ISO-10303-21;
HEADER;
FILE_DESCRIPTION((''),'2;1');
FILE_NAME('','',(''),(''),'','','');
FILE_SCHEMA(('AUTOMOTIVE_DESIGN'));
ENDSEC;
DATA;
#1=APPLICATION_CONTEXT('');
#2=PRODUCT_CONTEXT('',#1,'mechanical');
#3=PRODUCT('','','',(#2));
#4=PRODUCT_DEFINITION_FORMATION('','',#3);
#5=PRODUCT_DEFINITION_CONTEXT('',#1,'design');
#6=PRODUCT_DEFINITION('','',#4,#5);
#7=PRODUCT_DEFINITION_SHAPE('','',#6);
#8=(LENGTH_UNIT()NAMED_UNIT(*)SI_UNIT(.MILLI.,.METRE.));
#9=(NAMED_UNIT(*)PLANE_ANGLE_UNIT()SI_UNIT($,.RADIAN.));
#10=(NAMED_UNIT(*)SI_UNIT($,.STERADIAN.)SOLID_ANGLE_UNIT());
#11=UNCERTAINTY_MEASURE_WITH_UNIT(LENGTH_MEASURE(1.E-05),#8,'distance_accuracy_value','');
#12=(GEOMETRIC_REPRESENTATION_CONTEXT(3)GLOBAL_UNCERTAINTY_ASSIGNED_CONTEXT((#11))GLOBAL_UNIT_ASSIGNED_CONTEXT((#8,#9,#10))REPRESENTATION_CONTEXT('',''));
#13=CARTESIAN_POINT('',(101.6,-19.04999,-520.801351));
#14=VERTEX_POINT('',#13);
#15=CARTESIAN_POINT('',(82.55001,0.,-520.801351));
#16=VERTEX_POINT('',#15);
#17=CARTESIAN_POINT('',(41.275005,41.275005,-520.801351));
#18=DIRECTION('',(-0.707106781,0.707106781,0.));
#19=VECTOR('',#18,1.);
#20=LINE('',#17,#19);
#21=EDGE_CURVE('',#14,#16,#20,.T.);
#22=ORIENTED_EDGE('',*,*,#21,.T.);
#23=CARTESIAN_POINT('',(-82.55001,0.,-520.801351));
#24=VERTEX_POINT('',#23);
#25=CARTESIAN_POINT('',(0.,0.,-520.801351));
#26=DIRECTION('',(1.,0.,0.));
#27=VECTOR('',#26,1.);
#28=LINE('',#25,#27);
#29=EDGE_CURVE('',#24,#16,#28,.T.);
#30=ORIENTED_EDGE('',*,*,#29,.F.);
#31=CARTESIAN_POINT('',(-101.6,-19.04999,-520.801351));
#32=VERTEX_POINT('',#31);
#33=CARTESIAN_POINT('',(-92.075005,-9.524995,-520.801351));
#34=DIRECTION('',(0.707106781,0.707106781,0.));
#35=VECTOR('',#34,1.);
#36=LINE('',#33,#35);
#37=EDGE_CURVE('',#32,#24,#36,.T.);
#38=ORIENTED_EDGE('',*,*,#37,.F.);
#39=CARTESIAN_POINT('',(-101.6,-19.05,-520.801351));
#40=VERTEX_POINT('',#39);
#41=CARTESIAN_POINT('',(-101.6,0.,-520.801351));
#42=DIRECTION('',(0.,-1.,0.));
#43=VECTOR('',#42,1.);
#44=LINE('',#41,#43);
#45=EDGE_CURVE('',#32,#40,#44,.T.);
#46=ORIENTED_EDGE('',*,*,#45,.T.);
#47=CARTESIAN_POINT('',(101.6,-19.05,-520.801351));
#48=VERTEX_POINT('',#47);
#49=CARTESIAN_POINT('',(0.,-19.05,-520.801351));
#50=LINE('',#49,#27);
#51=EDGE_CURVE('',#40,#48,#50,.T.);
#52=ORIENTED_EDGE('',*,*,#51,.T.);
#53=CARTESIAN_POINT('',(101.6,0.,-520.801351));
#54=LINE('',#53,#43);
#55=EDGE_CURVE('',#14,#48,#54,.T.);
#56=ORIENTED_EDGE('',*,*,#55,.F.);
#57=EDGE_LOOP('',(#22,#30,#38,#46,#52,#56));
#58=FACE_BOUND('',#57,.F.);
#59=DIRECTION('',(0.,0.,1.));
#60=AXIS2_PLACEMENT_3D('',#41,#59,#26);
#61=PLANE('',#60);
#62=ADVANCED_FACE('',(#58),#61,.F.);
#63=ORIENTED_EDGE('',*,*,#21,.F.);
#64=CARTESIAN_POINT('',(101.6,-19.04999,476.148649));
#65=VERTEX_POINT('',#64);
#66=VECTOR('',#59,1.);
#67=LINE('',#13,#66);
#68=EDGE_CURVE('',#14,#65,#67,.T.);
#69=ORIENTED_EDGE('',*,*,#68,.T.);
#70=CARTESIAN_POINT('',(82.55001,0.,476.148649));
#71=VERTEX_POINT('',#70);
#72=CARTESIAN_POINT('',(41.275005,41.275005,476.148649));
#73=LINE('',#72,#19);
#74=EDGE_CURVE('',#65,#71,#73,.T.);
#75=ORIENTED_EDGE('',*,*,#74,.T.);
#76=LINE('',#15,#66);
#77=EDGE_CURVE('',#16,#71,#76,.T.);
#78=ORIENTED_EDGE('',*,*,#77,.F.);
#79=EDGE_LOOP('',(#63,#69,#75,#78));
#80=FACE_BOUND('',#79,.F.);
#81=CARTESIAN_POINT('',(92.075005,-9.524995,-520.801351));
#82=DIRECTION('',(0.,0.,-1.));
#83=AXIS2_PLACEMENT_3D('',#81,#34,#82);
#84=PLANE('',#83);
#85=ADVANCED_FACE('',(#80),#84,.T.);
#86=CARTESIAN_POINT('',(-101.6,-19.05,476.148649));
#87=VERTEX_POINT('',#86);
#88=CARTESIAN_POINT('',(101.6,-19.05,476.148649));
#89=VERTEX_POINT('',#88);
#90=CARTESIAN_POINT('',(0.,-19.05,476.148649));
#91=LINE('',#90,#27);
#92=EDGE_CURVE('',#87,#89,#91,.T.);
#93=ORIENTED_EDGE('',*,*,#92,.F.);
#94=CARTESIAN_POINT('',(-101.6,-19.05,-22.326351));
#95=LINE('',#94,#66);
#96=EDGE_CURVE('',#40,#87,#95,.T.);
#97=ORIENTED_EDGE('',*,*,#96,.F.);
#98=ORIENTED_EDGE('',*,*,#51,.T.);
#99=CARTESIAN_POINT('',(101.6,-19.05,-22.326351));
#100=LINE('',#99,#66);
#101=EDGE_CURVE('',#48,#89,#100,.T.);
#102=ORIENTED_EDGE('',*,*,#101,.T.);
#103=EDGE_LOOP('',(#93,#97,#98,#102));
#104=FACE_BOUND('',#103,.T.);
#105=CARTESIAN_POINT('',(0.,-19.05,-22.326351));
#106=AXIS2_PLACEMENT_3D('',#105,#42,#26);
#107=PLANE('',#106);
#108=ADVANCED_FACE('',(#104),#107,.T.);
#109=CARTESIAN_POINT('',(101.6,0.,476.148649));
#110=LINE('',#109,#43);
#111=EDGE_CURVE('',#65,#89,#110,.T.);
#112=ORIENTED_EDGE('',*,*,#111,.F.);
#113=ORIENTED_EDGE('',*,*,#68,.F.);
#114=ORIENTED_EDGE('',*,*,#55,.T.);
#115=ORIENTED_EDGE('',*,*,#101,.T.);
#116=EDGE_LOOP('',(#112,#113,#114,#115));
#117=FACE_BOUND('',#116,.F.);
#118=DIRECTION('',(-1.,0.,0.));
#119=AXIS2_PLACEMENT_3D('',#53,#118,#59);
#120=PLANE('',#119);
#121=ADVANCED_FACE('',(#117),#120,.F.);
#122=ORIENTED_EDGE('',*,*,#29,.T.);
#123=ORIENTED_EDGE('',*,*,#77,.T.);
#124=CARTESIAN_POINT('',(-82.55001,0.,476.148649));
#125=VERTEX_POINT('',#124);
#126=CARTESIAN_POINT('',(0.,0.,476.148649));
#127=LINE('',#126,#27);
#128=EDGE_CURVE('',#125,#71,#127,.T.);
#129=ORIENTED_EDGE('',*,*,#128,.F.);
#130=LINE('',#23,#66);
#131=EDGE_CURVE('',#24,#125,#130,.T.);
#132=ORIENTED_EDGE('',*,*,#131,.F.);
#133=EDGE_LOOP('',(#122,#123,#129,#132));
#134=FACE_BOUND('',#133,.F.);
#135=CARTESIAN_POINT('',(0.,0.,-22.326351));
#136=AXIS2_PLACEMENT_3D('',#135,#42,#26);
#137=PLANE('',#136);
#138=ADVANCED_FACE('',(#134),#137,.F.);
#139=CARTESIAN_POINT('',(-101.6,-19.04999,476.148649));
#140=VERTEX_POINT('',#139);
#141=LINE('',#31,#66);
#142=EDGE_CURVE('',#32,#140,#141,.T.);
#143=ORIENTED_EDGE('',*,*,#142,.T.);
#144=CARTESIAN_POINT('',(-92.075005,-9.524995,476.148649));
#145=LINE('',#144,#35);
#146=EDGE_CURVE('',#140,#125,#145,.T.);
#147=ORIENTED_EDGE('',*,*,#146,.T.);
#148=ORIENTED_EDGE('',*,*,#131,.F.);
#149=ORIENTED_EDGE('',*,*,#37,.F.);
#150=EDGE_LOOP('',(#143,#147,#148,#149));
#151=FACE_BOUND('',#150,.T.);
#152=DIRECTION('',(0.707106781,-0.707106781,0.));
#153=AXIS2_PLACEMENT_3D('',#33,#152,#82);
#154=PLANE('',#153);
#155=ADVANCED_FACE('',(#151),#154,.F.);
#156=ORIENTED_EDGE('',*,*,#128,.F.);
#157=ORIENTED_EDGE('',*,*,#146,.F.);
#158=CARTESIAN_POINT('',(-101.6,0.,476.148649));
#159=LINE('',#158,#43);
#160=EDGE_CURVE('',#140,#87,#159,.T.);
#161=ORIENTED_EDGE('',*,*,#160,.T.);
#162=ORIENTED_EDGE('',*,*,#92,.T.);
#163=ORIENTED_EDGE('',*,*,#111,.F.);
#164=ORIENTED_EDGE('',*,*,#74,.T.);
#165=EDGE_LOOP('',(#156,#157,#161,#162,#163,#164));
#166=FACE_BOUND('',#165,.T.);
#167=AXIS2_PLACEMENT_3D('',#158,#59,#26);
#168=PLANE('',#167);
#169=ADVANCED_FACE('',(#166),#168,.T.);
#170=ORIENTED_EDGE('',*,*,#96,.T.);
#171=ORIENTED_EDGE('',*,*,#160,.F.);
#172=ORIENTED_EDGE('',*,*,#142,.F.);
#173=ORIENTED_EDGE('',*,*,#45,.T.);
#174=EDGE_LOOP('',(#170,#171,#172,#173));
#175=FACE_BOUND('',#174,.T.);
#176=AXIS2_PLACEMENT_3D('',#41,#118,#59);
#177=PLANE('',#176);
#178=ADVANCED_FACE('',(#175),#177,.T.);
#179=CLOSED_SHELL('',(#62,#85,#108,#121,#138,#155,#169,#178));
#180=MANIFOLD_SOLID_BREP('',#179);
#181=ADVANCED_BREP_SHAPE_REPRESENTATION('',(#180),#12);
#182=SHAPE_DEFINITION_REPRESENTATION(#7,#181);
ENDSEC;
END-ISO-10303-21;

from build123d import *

# Parameters (mm, degrees)
F0_W     = 203.2
F0_H     = 996.95
F1_DEPTH = 19.05
F2_SIZE2 = 19.04999
F2_SIZE  = 19.04999


# Not quite as in the source:
# - a fillet or chamfer is up to 0.001 mm smaller than in the source, because OpenCascade refuses the exact size


with BuildPart() as f1:
    # F0 (on Front) → F1 (new body)
    with BuildSketch(Plane.XZ):
        with Locations((0, -22.3263513706)):
            Rectangle(F0_W, F0_H)
    extrude(amount=F1_DEPTH)

    # F2 (size 19.05 and 19.05 in the source; OpenCascade refuses exactly that, so slightly less here)
    f2_edges = [f1.edges().sort_by_distance(p)[0] for p in [
        (101.6, 0, -22.326351),
        (-101.6, 0, -22.326351),
    ]]
    chamfer(f2_edges, length=F2_SIZE, length2=F2_SIZE2)


solid = f1.part
